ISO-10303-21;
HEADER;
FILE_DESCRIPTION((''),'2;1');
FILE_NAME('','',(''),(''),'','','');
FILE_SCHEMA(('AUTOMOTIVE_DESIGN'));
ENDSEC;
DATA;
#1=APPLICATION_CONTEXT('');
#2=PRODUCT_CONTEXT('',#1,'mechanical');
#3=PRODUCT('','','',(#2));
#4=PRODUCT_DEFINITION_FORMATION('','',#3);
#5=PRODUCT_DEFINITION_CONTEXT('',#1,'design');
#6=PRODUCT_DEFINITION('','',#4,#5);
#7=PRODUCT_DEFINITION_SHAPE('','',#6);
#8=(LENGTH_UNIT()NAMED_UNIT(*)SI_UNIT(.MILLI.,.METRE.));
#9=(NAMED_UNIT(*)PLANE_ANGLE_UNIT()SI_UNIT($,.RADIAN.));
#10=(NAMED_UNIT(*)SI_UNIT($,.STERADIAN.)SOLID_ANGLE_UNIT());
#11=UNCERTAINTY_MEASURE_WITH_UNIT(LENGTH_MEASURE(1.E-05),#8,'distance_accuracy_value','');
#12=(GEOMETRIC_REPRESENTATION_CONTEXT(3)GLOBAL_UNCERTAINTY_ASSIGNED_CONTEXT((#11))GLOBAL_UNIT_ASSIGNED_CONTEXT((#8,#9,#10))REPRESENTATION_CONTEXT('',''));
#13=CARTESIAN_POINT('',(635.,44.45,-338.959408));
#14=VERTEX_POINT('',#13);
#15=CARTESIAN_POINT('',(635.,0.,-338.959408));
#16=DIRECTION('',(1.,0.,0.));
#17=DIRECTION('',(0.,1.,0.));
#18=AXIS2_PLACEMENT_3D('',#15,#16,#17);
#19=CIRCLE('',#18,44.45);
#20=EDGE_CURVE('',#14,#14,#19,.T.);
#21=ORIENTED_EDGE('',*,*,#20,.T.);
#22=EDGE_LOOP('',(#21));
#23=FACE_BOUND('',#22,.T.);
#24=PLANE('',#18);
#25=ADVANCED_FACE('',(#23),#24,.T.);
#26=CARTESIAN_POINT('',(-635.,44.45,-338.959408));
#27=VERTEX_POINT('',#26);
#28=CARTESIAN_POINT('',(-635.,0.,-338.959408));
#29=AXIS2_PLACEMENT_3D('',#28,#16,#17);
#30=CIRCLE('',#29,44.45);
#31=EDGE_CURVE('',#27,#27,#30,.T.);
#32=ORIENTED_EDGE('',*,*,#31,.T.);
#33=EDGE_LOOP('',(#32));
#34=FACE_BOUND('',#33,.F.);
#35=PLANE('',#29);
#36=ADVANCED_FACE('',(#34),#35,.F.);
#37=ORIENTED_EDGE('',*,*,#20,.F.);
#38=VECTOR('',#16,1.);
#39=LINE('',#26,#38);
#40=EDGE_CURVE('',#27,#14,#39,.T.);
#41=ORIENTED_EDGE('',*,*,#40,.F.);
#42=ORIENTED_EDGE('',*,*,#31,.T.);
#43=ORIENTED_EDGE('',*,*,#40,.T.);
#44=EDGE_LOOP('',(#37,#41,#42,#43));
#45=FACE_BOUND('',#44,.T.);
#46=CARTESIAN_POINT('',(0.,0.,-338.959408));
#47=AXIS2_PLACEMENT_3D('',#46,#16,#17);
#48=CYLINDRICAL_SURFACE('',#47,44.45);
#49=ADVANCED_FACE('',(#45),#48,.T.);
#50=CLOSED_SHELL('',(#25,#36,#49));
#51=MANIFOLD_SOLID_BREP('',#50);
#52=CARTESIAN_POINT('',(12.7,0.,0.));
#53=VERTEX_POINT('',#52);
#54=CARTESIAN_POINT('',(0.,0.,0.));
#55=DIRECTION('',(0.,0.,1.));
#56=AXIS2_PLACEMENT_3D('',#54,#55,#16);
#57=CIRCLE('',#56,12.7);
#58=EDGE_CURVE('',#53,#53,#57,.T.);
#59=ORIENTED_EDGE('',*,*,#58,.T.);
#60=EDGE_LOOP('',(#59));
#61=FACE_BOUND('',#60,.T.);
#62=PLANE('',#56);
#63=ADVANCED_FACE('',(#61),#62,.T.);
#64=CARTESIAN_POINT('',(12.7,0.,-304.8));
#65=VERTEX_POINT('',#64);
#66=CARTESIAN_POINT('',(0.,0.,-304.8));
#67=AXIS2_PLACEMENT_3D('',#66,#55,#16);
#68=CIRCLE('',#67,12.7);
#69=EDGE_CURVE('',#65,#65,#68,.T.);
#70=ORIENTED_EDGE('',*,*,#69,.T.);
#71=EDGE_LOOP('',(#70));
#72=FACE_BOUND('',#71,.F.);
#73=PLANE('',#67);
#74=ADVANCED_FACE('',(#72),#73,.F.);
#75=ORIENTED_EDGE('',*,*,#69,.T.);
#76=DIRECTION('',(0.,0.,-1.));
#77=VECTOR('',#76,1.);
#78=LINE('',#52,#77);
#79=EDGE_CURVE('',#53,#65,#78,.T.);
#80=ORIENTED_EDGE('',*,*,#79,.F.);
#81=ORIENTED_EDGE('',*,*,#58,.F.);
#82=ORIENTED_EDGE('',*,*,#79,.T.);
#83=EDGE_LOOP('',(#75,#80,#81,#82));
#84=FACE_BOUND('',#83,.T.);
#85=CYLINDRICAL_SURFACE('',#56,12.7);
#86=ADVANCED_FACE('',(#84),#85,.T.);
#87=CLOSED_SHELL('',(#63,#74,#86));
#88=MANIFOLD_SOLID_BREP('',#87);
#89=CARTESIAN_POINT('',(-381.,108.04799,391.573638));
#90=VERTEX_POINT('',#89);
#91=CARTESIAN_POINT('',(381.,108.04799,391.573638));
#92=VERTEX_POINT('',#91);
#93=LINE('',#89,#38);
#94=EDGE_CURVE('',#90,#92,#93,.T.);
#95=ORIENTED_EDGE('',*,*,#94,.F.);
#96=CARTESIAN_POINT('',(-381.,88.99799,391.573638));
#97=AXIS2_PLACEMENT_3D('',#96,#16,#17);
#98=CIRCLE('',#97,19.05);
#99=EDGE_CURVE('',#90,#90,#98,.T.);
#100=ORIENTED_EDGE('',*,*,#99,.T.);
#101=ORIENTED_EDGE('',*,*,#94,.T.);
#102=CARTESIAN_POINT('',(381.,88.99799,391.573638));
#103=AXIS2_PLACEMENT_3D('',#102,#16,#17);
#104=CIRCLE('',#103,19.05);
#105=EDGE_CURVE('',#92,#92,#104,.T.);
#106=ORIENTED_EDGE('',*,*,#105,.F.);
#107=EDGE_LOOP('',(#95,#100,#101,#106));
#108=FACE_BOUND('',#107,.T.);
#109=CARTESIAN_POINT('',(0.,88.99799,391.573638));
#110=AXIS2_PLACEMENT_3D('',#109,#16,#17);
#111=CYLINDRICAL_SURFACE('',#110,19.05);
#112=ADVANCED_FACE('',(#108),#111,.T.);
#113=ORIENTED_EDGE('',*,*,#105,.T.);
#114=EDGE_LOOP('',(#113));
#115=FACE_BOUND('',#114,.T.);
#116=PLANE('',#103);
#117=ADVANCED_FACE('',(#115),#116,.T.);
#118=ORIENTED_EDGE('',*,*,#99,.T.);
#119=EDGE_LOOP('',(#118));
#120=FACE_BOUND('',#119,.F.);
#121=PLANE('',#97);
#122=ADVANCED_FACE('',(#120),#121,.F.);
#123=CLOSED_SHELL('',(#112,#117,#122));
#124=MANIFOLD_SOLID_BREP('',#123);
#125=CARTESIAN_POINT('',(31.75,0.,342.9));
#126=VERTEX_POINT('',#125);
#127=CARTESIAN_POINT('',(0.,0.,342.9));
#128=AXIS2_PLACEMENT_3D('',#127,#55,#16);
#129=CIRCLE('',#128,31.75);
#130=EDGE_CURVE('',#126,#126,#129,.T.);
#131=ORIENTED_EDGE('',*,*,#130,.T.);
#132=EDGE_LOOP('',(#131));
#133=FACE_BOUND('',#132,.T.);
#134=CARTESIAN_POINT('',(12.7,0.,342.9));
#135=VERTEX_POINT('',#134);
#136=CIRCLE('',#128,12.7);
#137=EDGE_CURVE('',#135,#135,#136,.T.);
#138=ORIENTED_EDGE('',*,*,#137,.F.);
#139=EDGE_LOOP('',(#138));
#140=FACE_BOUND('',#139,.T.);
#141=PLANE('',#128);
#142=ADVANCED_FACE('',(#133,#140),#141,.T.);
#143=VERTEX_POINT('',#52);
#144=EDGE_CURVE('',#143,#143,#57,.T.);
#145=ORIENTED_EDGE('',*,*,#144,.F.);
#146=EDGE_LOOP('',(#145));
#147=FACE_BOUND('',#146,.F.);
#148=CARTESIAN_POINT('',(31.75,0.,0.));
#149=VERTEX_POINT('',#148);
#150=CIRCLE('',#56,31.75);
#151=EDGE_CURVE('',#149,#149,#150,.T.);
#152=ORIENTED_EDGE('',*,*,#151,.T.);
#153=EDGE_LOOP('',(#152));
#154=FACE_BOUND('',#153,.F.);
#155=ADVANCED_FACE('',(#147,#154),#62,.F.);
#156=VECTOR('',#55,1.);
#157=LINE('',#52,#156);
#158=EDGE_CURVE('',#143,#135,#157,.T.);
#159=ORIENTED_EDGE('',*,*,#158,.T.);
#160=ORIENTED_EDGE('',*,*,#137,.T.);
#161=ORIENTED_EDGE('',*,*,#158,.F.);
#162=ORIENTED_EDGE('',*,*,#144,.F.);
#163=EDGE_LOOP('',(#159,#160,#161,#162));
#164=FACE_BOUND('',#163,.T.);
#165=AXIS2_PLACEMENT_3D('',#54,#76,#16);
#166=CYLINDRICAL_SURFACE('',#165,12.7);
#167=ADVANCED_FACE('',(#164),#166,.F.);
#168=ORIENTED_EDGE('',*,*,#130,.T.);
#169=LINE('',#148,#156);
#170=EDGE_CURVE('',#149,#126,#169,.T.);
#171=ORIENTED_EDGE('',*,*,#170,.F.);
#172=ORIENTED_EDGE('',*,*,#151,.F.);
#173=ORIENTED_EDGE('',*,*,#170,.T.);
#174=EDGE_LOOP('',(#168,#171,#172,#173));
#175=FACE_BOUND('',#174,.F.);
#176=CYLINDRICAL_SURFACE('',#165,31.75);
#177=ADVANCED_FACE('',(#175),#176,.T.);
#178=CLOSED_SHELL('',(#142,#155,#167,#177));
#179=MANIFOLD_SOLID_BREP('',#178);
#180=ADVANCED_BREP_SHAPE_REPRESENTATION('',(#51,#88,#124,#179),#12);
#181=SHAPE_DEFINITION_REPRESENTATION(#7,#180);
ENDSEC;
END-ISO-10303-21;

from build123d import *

# Parameters (mm, degrees)
F0_R     = 31.75
F0_R_2   = 12.7
F1_DEPTH = 342.9
F2_DEPTH = 304.8
F3_R     = 44.45
F4_DEPTH = 635
F5_DEPTH = 635
F6_R     = 19.05
F7_DEPTH = 381
F8_DEPTH = 381


with BuildPart() as f1:
    # F0 (on Top) → F1 (new body)
    with BuildSketch(Plane.XY):
        Circle(F0_R)
        Circle(F0_R_2, mode=Mode.SUBTRACT)
    extrude(amount=F1_DEPTH)


with BuildPart() as f2:
    # F0 (on Top) → F2 (new body)
    with BuildSketch(Plane.XY):
        Circle(F0_R_2)
    extrude(amount=-F2_DEPTH)


with BuildPart() as f4:
    # F3 (on Right) → F4 (new body)
    with BuildSketch(Plane.YZ):
        with Locations((0, -338.9594081884)):
            Circle(F3_R)
    extrude(amount=F4_DEPTH)

    # F3 (on Right) → F5 (join)
    with BuildSketch(Plane.YZ):
        with Locations((0, -338.9594081884)):
            Circle(F3_R)
    extrude(amount=-F5_DEPTH)


with BuildPart() as f7:
    # F6 (on Right) → F7 (new body)
    with BuildSketch(Plane.YZ):
        with Locations((88.997989893, 391.5736377239)):
            Circle(F6_R)
    extrude(amount=F7_DEPTH)

    # F6 (on Right) → F8 (join)
    with BuildSketch(Plane.YZ):
        with Locations((88.997989893, 391.5736377239)):
            Circle(F6_R)
    extrude(amount=-F8_DEPTH)


solid = Compound([f1.part, f2.part, f4.part, f7.part])
